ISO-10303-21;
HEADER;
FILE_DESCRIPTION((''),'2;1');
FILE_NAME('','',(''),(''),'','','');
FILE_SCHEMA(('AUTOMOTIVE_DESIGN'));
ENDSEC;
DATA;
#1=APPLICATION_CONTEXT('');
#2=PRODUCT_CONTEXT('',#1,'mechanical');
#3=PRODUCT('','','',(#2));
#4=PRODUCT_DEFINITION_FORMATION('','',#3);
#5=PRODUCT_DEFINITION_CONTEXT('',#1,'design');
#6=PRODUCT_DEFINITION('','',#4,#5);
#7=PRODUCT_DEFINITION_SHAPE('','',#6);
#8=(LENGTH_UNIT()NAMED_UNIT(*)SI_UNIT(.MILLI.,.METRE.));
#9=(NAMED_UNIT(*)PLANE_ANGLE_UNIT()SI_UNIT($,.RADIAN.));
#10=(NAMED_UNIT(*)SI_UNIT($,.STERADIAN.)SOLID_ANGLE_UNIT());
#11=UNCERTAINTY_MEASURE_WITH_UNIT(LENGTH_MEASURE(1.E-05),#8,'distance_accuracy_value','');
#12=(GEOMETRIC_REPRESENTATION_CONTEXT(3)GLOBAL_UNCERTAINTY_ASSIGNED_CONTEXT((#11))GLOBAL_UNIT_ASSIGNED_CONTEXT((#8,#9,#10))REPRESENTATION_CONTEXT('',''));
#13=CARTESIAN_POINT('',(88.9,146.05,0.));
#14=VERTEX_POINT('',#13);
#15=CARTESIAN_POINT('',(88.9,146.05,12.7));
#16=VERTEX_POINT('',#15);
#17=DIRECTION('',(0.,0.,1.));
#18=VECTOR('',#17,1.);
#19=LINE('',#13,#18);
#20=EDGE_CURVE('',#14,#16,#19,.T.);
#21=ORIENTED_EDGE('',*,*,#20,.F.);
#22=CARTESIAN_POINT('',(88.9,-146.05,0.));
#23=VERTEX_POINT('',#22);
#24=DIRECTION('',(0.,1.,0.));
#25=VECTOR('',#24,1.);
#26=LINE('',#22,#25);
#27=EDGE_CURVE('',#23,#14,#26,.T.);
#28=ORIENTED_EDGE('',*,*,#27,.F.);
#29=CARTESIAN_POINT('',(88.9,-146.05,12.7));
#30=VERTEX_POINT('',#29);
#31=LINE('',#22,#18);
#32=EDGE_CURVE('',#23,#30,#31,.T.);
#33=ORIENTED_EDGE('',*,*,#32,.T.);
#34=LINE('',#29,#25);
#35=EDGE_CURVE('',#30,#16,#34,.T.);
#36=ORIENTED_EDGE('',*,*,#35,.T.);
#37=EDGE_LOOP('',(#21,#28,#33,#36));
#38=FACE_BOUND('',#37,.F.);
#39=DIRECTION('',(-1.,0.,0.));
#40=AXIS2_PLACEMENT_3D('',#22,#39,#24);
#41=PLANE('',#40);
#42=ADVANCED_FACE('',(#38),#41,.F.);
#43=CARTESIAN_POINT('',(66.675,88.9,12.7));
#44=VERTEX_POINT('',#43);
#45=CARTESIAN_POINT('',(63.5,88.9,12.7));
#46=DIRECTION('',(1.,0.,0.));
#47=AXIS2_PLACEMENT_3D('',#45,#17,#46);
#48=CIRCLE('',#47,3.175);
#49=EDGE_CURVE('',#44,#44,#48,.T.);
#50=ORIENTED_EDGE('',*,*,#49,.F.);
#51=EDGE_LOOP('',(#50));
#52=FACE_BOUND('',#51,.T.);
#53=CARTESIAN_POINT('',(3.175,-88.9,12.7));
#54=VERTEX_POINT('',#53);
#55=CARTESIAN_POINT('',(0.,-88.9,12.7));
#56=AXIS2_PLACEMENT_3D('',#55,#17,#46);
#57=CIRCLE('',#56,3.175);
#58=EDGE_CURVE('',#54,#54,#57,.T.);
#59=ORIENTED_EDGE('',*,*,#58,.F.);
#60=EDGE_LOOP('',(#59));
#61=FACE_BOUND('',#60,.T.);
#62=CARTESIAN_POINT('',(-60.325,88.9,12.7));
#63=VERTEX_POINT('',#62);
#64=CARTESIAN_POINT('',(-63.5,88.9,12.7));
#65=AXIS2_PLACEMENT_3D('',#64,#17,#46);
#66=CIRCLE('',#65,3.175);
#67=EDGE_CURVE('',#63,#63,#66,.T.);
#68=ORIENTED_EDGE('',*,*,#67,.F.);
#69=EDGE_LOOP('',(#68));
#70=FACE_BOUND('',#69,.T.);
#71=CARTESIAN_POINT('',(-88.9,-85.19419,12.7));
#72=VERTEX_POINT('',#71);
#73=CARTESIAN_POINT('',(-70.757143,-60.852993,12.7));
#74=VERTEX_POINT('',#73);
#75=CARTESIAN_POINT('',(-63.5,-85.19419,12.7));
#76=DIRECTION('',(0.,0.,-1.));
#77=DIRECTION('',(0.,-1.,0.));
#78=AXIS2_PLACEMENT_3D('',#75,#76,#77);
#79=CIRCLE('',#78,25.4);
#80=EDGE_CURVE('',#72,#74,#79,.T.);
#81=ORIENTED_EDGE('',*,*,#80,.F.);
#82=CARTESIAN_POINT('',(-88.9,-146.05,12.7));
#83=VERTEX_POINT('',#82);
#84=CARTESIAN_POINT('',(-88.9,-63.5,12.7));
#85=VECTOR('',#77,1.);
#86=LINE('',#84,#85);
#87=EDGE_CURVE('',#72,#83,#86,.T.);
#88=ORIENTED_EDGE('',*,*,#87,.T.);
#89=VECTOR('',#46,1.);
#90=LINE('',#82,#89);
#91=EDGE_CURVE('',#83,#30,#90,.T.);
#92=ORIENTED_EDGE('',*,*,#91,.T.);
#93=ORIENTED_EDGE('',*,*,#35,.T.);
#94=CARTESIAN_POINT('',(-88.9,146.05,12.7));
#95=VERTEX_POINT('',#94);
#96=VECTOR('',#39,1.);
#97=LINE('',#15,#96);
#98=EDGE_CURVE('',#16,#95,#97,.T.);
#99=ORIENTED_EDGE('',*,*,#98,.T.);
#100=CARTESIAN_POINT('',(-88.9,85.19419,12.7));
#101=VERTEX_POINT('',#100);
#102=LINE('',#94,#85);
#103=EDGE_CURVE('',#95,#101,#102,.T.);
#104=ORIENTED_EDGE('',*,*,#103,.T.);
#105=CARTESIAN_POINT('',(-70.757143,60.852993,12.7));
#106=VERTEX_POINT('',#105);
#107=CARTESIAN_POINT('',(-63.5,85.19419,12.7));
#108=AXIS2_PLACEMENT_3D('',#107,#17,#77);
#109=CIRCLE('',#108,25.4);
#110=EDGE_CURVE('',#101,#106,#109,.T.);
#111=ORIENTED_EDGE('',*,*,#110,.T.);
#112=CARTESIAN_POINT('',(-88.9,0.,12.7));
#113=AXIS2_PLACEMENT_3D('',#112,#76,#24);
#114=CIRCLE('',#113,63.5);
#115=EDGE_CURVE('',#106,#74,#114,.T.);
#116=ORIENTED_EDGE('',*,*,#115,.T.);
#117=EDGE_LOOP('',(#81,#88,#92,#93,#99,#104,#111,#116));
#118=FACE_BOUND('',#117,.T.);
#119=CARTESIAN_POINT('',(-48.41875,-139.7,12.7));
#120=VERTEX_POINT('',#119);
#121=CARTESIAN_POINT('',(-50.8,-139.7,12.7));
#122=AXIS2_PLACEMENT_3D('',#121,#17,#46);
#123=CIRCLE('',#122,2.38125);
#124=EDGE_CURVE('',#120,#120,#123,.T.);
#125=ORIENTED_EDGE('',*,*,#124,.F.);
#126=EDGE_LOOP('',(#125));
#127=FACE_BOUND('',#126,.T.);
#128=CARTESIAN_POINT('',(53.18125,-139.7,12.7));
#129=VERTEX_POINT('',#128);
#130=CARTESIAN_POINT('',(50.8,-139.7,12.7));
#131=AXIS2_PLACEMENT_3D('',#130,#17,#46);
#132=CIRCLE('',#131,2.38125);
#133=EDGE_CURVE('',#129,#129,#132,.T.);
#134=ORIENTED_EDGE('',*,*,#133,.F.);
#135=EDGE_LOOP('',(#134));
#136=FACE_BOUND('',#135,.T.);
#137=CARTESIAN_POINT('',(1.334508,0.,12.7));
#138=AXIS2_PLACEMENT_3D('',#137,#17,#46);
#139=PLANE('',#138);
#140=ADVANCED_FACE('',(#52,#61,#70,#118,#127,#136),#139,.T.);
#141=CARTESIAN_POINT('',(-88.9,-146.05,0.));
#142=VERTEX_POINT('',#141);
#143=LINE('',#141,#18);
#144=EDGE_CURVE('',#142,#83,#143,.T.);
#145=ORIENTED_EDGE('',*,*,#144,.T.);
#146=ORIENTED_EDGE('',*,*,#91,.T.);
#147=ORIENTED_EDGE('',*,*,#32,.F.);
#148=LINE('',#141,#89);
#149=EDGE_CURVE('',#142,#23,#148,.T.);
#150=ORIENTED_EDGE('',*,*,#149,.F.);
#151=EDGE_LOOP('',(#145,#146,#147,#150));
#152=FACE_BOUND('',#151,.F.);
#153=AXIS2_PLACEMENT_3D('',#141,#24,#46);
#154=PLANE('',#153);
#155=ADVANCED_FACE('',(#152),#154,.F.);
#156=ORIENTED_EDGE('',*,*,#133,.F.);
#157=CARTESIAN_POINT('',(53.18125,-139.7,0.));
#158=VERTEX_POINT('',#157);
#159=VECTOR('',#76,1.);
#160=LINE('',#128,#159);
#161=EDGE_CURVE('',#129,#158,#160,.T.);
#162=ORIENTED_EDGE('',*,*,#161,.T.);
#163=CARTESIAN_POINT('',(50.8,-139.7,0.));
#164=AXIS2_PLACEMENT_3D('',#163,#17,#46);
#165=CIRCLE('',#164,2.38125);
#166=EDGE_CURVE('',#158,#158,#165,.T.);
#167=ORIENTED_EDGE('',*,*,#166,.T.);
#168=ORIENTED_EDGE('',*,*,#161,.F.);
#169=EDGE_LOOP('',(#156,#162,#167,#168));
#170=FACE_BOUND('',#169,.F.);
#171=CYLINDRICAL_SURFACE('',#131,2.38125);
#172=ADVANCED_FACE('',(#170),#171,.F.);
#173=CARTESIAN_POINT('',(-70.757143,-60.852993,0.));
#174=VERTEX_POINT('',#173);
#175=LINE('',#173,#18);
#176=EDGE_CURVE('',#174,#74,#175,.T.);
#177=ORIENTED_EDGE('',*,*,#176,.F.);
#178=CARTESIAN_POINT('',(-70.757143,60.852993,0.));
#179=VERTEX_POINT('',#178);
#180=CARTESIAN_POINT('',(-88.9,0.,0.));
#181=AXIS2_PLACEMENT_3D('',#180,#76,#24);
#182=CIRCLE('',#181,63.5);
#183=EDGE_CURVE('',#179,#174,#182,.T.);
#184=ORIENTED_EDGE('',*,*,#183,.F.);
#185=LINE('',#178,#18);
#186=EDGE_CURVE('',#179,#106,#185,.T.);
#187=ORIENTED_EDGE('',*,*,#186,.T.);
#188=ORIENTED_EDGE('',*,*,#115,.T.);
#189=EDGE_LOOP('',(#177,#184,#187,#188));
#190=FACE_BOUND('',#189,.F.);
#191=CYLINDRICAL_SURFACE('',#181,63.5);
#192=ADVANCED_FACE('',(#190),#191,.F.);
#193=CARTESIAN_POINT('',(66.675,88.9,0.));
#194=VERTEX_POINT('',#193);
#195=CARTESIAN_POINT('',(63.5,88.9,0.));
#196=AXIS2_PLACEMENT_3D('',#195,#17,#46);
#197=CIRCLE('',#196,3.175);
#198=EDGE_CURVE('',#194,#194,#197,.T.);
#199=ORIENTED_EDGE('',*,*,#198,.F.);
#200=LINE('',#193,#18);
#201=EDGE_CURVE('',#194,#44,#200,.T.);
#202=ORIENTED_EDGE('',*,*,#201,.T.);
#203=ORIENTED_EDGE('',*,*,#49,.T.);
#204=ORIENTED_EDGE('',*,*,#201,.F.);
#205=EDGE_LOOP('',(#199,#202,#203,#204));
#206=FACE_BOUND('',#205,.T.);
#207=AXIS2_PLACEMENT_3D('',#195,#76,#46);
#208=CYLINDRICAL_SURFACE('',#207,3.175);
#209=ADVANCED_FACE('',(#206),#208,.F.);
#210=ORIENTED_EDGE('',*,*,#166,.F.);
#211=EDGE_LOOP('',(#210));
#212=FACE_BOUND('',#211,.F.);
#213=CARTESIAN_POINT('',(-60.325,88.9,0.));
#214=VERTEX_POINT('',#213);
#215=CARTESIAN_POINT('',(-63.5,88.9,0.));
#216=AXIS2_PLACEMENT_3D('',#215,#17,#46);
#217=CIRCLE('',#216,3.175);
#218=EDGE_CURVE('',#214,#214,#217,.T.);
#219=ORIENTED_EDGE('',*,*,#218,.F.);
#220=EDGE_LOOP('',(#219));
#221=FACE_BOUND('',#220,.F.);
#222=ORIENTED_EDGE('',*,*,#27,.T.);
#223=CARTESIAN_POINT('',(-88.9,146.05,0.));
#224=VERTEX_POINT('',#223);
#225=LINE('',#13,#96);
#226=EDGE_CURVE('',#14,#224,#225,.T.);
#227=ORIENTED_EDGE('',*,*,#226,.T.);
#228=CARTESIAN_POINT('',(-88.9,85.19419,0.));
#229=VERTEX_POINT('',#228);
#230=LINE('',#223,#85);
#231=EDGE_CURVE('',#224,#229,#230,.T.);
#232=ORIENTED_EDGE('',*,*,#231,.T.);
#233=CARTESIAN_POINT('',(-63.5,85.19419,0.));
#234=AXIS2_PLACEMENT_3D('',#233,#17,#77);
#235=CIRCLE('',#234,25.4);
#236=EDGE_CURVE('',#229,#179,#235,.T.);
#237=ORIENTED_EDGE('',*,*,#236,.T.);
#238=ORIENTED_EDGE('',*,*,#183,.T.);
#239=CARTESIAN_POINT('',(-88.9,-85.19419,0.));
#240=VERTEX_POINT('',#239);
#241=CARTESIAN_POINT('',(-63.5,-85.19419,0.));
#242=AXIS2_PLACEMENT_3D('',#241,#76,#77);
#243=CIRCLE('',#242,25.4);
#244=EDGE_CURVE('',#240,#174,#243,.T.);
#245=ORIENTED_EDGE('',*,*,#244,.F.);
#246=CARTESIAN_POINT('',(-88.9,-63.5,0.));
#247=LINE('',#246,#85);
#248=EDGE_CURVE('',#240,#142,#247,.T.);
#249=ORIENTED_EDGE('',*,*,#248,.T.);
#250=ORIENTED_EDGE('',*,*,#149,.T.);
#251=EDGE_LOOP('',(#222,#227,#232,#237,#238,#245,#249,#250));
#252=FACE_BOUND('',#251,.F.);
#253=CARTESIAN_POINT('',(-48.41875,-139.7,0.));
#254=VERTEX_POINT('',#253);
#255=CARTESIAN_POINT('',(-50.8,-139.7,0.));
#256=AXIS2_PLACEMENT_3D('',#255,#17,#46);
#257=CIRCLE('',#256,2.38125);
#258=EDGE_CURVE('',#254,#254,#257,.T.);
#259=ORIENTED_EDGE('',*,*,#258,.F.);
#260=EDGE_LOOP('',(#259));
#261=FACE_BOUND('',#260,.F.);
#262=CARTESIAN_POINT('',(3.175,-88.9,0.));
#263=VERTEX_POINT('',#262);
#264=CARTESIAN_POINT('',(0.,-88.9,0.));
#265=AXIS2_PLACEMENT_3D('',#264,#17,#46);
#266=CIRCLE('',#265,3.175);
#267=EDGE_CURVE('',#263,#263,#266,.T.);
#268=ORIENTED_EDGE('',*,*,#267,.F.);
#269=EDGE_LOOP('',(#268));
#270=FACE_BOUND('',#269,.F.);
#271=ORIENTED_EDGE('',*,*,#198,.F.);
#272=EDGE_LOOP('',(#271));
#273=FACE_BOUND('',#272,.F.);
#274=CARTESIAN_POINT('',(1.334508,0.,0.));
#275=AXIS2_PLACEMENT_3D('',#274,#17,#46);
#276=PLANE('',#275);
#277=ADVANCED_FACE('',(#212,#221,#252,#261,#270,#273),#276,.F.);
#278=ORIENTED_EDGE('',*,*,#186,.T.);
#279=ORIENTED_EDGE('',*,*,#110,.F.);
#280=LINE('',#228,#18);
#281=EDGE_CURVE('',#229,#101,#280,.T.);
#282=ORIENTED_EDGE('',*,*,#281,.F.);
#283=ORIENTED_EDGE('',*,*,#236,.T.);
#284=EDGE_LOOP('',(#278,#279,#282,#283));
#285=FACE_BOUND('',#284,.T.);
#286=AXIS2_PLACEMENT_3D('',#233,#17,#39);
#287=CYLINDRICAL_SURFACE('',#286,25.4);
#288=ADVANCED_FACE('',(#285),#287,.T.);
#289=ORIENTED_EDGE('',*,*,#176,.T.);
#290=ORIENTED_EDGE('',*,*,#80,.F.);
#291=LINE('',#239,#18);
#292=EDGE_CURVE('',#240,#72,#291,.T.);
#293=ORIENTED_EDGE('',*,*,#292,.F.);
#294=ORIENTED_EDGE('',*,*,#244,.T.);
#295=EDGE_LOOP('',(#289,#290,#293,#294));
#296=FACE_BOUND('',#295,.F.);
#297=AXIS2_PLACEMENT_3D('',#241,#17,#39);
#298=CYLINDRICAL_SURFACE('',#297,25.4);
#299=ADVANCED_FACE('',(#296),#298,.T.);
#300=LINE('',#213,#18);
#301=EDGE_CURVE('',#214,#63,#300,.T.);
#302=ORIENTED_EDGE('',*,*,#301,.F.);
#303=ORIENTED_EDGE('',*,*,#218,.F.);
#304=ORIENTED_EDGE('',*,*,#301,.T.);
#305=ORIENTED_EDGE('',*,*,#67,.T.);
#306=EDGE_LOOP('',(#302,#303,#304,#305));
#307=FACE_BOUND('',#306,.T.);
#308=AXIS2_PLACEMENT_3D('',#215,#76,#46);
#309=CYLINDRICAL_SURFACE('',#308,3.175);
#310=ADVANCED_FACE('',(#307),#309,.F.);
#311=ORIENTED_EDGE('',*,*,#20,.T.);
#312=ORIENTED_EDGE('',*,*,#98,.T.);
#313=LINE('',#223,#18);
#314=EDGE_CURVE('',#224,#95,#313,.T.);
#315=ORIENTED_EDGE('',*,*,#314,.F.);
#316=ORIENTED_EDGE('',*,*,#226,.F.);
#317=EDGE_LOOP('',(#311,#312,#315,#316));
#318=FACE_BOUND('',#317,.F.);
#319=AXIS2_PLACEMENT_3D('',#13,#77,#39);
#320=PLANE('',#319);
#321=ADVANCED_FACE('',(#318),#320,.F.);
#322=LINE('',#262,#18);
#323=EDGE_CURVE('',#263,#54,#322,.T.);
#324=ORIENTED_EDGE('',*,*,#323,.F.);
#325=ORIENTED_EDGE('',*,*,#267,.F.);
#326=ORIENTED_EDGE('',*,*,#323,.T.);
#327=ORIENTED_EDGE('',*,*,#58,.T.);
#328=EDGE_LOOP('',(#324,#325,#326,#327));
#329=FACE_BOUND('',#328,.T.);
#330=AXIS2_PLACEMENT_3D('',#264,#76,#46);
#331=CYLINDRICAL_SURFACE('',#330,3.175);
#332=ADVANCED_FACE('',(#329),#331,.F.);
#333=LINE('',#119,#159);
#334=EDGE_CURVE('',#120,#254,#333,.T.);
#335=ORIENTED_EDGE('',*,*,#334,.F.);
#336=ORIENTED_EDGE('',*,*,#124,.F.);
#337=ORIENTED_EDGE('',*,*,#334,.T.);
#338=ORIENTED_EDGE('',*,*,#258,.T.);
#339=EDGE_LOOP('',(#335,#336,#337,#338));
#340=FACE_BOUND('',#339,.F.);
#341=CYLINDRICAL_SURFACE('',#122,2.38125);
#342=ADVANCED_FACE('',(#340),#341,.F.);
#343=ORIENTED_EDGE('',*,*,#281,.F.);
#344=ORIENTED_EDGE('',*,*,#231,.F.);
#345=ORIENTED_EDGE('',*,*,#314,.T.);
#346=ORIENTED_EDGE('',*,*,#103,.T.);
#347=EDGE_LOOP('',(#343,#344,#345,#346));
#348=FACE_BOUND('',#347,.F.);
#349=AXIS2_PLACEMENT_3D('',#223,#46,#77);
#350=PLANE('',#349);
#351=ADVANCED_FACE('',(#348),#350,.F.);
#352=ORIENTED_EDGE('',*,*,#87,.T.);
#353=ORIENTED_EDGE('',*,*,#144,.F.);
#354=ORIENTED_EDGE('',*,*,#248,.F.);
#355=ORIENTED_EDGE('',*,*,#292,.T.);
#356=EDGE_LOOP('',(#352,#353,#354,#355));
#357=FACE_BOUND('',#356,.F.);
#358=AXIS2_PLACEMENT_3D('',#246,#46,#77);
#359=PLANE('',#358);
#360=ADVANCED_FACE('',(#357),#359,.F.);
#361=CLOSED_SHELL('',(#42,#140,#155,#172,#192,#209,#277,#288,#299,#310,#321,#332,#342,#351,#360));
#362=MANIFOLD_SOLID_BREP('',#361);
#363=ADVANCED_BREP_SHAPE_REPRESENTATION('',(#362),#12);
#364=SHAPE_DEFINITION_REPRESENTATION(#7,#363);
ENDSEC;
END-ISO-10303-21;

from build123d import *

# Parameters (mm, degrees)
F0_R     = 3.175
F1_DEPTH = 12.7
F2_R     = 25.4
F3_R     = 2.38125
F4_DEPTH = 12.701


with BuildPart() as f1:
    # F0 (on Top) → F1 (new body)
    with BuildSketch(Plane.XY):
        with BuildLine():
            Line((88.9, -146.05), (88.9, 146.05))
            Line((88.9, 146.05), (-88.9, 146.05))
            Line((-88.9, 146.05), (-88.9, 63.5))
            ThreePointArc((-88.9, 63.5), (-25.4, 0), (-88.9, -63.5))
            Line((-88.9, -63.5), (-88.9, -146.05))
            Line((-88.9, -146.05), (88.9, -146.05))
        make_face()
        with Locations((0, -88.9)):
            Circle(F0_R, mode=Mode.SUBTRACT)
        with Locations((-63.5, 88.9)):
            Circle(F0_R, mode=Mode.SUBTRACT)
        with Locations((63.5, 88.9)):
            Circle(F0_R, mode=Mode.SUBTRACT)
    extrude(amount=F1_DEPTH)

    # F2
    f2_edges = [f1.edges().sort_by_distance(p)[0] for p in [
        (-88.9, -63.5, 6.35),
        (-88.9, 63.5, 6.35),
    ]]
    fillet(f2_edges, radius=F2_R)

    # F3 (on face) → F4 (cut, through all)
    with BuildSketch(Plane.XY.offset(12.7)):
        with Locations((-50.8, -139.7)):
            Circle(F3_R)
        with Locations((50.8, -139.7)):
            Circle(F3_R)
    extrude(amount=-F4_DEPTH, mode=Mode.SUBTRACT)


solid = f1.part
